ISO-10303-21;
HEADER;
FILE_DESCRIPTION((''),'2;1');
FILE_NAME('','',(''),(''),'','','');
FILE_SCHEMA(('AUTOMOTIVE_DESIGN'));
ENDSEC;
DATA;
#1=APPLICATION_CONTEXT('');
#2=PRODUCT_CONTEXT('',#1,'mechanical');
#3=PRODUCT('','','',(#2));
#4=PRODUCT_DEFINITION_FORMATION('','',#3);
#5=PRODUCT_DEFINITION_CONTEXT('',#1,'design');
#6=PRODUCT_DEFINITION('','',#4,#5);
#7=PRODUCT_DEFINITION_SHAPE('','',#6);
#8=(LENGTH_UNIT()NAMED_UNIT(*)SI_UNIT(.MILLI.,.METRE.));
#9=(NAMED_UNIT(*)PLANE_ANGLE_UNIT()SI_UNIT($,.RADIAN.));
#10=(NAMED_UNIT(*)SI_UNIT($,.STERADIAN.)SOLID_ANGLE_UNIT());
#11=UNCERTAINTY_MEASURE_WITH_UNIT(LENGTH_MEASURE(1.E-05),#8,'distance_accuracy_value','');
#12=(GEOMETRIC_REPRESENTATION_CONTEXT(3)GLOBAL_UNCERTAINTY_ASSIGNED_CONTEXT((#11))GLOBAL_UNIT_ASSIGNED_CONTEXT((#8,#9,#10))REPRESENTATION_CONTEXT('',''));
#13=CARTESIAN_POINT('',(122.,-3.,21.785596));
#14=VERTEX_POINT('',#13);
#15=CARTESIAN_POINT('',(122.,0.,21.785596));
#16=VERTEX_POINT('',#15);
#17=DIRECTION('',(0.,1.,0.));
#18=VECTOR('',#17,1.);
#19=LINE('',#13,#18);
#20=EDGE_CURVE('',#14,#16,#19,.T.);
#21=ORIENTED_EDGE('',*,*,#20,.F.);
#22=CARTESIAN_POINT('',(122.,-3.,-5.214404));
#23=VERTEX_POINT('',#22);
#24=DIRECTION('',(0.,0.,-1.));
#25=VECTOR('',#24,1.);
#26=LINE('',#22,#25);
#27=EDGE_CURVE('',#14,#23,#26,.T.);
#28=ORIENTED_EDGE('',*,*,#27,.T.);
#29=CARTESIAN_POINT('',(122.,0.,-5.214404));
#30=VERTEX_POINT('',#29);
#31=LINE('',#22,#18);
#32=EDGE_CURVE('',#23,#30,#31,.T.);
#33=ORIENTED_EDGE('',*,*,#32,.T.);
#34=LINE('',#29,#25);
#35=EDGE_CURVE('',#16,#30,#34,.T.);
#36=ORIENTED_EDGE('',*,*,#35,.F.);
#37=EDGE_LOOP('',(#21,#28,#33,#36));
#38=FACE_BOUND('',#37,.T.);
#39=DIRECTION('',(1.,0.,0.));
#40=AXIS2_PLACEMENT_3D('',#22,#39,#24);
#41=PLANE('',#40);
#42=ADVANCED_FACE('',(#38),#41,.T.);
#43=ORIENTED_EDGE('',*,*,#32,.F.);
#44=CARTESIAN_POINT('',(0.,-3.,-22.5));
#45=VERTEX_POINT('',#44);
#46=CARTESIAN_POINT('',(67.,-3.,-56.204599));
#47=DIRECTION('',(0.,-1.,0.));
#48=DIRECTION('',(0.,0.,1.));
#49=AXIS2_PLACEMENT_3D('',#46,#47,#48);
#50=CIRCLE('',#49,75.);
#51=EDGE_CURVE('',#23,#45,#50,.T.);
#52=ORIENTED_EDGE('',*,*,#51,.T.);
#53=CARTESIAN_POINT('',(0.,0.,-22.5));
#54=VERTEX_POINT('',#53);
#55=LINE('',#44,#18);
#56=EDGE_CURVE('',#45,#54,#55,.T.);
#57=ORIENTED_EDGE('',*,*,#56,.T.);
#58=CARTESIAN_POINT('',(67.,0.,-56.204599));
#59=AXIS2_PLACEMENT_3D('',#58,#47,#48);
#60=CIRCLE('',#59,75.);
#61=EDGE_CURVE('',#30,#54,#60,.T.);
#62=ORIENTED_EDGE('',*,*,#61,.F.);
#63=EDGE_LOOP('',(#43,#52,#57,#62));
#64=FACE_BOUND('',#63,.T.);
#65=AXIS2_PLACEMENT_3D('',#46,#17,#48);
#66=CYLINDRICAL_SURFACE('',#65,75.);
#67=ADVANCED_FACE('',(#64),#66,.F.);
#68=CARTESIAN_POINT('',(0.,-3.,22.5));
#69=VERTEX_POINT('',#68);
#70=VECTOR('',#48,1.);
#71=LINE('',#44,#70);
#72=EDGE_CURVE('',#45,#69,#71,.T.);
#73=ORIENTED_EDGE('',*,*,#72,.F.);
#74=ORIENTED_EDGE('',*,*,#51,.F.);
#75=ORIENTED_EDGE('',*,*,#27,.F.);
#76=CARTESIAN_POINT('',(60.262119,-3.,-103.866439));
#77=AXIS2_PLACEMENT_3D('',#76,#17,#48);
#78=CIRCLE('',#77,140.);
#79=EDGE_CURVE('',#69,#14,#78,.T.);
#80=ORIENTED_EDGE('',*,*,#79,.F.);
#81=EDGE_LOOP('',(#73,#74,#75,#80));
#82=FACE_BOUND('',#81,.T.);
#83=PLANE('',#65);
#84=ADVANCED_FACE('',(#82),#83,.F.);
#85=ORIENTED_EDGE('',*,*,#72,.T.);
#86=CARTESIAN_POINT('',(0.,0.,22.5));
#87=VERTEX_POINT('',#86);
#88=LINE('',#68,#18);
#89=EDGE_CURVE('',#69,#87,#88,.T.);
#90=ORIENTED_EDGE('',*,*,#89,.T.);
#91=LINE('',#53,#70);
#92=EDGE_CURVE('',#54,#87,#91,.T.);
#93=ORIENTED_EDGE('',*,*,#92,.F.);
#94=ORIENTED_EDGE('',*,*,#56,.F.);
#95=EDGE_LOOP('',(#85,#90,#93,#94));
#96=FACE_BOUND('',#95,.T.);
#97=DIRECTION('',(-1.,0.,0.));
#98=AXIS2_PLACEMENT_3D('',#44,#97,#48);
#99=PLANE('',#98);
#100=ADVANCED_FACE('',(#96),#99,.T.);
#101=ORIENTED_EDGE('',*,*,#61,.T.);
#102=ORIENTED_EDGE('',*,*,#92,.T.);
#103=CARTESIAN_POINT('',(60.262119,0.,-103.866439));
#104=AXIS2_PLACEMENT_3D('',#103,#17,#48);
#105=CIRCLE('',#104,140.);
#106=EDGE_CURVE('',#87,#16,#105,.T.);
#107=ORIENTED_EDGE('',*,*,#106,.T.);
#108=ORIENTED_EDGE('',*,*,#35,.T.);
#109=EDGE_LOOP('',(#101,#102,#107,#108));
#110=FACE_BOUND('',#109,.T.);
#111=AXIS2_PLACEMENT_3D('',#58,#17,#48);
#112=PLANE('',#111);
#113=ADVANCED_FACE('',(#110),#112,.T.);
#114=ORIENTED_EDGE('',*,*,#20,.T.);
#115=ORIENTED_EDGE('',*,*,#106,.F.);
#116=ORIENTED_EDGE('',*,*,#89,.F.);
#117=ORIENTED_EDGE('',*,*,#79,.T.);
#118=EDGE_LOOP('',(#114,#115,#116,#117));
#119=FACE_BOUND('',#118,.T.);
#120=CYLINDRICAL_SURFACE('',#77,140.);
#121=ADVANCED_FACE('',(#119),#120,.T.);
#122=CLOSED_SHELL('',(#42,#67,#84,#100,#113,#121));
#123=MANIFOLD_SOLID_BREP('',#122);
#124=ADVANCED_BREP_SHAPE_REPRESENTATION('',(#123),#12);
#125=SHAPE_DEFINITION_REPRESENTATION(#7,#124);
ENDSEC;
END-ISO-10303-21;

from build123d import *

# Parameters (mm, degrees)
BASE_FLANGE1_DEPTH = 3


# Sheet-metal steps are written as plain solids
with BuildPart() as part:
    # Sketch1 → Base-Flange1 (new body)
    with BuildSketch(Plane(origin=(0, 0, 0), x_dir=(1, 0, 0), z_dir=(0, 1, 0))):
        with BuildLine():
            Line((0, 22.5), (0, -22.5))
            ThreePointArc((0, -22.5), (61.081912634, -36.131160269), (122, -21.785596043))
            Line((122, -21.785596043), (122, 5.214403957))
            ThreePointArc((122, 5.214403957), (56.478690308, -18.053747525), (0, 22.5))
        make_face()
    extrude(amount=-BASE_FLANGE1_DEPTH)


solid = part.part
